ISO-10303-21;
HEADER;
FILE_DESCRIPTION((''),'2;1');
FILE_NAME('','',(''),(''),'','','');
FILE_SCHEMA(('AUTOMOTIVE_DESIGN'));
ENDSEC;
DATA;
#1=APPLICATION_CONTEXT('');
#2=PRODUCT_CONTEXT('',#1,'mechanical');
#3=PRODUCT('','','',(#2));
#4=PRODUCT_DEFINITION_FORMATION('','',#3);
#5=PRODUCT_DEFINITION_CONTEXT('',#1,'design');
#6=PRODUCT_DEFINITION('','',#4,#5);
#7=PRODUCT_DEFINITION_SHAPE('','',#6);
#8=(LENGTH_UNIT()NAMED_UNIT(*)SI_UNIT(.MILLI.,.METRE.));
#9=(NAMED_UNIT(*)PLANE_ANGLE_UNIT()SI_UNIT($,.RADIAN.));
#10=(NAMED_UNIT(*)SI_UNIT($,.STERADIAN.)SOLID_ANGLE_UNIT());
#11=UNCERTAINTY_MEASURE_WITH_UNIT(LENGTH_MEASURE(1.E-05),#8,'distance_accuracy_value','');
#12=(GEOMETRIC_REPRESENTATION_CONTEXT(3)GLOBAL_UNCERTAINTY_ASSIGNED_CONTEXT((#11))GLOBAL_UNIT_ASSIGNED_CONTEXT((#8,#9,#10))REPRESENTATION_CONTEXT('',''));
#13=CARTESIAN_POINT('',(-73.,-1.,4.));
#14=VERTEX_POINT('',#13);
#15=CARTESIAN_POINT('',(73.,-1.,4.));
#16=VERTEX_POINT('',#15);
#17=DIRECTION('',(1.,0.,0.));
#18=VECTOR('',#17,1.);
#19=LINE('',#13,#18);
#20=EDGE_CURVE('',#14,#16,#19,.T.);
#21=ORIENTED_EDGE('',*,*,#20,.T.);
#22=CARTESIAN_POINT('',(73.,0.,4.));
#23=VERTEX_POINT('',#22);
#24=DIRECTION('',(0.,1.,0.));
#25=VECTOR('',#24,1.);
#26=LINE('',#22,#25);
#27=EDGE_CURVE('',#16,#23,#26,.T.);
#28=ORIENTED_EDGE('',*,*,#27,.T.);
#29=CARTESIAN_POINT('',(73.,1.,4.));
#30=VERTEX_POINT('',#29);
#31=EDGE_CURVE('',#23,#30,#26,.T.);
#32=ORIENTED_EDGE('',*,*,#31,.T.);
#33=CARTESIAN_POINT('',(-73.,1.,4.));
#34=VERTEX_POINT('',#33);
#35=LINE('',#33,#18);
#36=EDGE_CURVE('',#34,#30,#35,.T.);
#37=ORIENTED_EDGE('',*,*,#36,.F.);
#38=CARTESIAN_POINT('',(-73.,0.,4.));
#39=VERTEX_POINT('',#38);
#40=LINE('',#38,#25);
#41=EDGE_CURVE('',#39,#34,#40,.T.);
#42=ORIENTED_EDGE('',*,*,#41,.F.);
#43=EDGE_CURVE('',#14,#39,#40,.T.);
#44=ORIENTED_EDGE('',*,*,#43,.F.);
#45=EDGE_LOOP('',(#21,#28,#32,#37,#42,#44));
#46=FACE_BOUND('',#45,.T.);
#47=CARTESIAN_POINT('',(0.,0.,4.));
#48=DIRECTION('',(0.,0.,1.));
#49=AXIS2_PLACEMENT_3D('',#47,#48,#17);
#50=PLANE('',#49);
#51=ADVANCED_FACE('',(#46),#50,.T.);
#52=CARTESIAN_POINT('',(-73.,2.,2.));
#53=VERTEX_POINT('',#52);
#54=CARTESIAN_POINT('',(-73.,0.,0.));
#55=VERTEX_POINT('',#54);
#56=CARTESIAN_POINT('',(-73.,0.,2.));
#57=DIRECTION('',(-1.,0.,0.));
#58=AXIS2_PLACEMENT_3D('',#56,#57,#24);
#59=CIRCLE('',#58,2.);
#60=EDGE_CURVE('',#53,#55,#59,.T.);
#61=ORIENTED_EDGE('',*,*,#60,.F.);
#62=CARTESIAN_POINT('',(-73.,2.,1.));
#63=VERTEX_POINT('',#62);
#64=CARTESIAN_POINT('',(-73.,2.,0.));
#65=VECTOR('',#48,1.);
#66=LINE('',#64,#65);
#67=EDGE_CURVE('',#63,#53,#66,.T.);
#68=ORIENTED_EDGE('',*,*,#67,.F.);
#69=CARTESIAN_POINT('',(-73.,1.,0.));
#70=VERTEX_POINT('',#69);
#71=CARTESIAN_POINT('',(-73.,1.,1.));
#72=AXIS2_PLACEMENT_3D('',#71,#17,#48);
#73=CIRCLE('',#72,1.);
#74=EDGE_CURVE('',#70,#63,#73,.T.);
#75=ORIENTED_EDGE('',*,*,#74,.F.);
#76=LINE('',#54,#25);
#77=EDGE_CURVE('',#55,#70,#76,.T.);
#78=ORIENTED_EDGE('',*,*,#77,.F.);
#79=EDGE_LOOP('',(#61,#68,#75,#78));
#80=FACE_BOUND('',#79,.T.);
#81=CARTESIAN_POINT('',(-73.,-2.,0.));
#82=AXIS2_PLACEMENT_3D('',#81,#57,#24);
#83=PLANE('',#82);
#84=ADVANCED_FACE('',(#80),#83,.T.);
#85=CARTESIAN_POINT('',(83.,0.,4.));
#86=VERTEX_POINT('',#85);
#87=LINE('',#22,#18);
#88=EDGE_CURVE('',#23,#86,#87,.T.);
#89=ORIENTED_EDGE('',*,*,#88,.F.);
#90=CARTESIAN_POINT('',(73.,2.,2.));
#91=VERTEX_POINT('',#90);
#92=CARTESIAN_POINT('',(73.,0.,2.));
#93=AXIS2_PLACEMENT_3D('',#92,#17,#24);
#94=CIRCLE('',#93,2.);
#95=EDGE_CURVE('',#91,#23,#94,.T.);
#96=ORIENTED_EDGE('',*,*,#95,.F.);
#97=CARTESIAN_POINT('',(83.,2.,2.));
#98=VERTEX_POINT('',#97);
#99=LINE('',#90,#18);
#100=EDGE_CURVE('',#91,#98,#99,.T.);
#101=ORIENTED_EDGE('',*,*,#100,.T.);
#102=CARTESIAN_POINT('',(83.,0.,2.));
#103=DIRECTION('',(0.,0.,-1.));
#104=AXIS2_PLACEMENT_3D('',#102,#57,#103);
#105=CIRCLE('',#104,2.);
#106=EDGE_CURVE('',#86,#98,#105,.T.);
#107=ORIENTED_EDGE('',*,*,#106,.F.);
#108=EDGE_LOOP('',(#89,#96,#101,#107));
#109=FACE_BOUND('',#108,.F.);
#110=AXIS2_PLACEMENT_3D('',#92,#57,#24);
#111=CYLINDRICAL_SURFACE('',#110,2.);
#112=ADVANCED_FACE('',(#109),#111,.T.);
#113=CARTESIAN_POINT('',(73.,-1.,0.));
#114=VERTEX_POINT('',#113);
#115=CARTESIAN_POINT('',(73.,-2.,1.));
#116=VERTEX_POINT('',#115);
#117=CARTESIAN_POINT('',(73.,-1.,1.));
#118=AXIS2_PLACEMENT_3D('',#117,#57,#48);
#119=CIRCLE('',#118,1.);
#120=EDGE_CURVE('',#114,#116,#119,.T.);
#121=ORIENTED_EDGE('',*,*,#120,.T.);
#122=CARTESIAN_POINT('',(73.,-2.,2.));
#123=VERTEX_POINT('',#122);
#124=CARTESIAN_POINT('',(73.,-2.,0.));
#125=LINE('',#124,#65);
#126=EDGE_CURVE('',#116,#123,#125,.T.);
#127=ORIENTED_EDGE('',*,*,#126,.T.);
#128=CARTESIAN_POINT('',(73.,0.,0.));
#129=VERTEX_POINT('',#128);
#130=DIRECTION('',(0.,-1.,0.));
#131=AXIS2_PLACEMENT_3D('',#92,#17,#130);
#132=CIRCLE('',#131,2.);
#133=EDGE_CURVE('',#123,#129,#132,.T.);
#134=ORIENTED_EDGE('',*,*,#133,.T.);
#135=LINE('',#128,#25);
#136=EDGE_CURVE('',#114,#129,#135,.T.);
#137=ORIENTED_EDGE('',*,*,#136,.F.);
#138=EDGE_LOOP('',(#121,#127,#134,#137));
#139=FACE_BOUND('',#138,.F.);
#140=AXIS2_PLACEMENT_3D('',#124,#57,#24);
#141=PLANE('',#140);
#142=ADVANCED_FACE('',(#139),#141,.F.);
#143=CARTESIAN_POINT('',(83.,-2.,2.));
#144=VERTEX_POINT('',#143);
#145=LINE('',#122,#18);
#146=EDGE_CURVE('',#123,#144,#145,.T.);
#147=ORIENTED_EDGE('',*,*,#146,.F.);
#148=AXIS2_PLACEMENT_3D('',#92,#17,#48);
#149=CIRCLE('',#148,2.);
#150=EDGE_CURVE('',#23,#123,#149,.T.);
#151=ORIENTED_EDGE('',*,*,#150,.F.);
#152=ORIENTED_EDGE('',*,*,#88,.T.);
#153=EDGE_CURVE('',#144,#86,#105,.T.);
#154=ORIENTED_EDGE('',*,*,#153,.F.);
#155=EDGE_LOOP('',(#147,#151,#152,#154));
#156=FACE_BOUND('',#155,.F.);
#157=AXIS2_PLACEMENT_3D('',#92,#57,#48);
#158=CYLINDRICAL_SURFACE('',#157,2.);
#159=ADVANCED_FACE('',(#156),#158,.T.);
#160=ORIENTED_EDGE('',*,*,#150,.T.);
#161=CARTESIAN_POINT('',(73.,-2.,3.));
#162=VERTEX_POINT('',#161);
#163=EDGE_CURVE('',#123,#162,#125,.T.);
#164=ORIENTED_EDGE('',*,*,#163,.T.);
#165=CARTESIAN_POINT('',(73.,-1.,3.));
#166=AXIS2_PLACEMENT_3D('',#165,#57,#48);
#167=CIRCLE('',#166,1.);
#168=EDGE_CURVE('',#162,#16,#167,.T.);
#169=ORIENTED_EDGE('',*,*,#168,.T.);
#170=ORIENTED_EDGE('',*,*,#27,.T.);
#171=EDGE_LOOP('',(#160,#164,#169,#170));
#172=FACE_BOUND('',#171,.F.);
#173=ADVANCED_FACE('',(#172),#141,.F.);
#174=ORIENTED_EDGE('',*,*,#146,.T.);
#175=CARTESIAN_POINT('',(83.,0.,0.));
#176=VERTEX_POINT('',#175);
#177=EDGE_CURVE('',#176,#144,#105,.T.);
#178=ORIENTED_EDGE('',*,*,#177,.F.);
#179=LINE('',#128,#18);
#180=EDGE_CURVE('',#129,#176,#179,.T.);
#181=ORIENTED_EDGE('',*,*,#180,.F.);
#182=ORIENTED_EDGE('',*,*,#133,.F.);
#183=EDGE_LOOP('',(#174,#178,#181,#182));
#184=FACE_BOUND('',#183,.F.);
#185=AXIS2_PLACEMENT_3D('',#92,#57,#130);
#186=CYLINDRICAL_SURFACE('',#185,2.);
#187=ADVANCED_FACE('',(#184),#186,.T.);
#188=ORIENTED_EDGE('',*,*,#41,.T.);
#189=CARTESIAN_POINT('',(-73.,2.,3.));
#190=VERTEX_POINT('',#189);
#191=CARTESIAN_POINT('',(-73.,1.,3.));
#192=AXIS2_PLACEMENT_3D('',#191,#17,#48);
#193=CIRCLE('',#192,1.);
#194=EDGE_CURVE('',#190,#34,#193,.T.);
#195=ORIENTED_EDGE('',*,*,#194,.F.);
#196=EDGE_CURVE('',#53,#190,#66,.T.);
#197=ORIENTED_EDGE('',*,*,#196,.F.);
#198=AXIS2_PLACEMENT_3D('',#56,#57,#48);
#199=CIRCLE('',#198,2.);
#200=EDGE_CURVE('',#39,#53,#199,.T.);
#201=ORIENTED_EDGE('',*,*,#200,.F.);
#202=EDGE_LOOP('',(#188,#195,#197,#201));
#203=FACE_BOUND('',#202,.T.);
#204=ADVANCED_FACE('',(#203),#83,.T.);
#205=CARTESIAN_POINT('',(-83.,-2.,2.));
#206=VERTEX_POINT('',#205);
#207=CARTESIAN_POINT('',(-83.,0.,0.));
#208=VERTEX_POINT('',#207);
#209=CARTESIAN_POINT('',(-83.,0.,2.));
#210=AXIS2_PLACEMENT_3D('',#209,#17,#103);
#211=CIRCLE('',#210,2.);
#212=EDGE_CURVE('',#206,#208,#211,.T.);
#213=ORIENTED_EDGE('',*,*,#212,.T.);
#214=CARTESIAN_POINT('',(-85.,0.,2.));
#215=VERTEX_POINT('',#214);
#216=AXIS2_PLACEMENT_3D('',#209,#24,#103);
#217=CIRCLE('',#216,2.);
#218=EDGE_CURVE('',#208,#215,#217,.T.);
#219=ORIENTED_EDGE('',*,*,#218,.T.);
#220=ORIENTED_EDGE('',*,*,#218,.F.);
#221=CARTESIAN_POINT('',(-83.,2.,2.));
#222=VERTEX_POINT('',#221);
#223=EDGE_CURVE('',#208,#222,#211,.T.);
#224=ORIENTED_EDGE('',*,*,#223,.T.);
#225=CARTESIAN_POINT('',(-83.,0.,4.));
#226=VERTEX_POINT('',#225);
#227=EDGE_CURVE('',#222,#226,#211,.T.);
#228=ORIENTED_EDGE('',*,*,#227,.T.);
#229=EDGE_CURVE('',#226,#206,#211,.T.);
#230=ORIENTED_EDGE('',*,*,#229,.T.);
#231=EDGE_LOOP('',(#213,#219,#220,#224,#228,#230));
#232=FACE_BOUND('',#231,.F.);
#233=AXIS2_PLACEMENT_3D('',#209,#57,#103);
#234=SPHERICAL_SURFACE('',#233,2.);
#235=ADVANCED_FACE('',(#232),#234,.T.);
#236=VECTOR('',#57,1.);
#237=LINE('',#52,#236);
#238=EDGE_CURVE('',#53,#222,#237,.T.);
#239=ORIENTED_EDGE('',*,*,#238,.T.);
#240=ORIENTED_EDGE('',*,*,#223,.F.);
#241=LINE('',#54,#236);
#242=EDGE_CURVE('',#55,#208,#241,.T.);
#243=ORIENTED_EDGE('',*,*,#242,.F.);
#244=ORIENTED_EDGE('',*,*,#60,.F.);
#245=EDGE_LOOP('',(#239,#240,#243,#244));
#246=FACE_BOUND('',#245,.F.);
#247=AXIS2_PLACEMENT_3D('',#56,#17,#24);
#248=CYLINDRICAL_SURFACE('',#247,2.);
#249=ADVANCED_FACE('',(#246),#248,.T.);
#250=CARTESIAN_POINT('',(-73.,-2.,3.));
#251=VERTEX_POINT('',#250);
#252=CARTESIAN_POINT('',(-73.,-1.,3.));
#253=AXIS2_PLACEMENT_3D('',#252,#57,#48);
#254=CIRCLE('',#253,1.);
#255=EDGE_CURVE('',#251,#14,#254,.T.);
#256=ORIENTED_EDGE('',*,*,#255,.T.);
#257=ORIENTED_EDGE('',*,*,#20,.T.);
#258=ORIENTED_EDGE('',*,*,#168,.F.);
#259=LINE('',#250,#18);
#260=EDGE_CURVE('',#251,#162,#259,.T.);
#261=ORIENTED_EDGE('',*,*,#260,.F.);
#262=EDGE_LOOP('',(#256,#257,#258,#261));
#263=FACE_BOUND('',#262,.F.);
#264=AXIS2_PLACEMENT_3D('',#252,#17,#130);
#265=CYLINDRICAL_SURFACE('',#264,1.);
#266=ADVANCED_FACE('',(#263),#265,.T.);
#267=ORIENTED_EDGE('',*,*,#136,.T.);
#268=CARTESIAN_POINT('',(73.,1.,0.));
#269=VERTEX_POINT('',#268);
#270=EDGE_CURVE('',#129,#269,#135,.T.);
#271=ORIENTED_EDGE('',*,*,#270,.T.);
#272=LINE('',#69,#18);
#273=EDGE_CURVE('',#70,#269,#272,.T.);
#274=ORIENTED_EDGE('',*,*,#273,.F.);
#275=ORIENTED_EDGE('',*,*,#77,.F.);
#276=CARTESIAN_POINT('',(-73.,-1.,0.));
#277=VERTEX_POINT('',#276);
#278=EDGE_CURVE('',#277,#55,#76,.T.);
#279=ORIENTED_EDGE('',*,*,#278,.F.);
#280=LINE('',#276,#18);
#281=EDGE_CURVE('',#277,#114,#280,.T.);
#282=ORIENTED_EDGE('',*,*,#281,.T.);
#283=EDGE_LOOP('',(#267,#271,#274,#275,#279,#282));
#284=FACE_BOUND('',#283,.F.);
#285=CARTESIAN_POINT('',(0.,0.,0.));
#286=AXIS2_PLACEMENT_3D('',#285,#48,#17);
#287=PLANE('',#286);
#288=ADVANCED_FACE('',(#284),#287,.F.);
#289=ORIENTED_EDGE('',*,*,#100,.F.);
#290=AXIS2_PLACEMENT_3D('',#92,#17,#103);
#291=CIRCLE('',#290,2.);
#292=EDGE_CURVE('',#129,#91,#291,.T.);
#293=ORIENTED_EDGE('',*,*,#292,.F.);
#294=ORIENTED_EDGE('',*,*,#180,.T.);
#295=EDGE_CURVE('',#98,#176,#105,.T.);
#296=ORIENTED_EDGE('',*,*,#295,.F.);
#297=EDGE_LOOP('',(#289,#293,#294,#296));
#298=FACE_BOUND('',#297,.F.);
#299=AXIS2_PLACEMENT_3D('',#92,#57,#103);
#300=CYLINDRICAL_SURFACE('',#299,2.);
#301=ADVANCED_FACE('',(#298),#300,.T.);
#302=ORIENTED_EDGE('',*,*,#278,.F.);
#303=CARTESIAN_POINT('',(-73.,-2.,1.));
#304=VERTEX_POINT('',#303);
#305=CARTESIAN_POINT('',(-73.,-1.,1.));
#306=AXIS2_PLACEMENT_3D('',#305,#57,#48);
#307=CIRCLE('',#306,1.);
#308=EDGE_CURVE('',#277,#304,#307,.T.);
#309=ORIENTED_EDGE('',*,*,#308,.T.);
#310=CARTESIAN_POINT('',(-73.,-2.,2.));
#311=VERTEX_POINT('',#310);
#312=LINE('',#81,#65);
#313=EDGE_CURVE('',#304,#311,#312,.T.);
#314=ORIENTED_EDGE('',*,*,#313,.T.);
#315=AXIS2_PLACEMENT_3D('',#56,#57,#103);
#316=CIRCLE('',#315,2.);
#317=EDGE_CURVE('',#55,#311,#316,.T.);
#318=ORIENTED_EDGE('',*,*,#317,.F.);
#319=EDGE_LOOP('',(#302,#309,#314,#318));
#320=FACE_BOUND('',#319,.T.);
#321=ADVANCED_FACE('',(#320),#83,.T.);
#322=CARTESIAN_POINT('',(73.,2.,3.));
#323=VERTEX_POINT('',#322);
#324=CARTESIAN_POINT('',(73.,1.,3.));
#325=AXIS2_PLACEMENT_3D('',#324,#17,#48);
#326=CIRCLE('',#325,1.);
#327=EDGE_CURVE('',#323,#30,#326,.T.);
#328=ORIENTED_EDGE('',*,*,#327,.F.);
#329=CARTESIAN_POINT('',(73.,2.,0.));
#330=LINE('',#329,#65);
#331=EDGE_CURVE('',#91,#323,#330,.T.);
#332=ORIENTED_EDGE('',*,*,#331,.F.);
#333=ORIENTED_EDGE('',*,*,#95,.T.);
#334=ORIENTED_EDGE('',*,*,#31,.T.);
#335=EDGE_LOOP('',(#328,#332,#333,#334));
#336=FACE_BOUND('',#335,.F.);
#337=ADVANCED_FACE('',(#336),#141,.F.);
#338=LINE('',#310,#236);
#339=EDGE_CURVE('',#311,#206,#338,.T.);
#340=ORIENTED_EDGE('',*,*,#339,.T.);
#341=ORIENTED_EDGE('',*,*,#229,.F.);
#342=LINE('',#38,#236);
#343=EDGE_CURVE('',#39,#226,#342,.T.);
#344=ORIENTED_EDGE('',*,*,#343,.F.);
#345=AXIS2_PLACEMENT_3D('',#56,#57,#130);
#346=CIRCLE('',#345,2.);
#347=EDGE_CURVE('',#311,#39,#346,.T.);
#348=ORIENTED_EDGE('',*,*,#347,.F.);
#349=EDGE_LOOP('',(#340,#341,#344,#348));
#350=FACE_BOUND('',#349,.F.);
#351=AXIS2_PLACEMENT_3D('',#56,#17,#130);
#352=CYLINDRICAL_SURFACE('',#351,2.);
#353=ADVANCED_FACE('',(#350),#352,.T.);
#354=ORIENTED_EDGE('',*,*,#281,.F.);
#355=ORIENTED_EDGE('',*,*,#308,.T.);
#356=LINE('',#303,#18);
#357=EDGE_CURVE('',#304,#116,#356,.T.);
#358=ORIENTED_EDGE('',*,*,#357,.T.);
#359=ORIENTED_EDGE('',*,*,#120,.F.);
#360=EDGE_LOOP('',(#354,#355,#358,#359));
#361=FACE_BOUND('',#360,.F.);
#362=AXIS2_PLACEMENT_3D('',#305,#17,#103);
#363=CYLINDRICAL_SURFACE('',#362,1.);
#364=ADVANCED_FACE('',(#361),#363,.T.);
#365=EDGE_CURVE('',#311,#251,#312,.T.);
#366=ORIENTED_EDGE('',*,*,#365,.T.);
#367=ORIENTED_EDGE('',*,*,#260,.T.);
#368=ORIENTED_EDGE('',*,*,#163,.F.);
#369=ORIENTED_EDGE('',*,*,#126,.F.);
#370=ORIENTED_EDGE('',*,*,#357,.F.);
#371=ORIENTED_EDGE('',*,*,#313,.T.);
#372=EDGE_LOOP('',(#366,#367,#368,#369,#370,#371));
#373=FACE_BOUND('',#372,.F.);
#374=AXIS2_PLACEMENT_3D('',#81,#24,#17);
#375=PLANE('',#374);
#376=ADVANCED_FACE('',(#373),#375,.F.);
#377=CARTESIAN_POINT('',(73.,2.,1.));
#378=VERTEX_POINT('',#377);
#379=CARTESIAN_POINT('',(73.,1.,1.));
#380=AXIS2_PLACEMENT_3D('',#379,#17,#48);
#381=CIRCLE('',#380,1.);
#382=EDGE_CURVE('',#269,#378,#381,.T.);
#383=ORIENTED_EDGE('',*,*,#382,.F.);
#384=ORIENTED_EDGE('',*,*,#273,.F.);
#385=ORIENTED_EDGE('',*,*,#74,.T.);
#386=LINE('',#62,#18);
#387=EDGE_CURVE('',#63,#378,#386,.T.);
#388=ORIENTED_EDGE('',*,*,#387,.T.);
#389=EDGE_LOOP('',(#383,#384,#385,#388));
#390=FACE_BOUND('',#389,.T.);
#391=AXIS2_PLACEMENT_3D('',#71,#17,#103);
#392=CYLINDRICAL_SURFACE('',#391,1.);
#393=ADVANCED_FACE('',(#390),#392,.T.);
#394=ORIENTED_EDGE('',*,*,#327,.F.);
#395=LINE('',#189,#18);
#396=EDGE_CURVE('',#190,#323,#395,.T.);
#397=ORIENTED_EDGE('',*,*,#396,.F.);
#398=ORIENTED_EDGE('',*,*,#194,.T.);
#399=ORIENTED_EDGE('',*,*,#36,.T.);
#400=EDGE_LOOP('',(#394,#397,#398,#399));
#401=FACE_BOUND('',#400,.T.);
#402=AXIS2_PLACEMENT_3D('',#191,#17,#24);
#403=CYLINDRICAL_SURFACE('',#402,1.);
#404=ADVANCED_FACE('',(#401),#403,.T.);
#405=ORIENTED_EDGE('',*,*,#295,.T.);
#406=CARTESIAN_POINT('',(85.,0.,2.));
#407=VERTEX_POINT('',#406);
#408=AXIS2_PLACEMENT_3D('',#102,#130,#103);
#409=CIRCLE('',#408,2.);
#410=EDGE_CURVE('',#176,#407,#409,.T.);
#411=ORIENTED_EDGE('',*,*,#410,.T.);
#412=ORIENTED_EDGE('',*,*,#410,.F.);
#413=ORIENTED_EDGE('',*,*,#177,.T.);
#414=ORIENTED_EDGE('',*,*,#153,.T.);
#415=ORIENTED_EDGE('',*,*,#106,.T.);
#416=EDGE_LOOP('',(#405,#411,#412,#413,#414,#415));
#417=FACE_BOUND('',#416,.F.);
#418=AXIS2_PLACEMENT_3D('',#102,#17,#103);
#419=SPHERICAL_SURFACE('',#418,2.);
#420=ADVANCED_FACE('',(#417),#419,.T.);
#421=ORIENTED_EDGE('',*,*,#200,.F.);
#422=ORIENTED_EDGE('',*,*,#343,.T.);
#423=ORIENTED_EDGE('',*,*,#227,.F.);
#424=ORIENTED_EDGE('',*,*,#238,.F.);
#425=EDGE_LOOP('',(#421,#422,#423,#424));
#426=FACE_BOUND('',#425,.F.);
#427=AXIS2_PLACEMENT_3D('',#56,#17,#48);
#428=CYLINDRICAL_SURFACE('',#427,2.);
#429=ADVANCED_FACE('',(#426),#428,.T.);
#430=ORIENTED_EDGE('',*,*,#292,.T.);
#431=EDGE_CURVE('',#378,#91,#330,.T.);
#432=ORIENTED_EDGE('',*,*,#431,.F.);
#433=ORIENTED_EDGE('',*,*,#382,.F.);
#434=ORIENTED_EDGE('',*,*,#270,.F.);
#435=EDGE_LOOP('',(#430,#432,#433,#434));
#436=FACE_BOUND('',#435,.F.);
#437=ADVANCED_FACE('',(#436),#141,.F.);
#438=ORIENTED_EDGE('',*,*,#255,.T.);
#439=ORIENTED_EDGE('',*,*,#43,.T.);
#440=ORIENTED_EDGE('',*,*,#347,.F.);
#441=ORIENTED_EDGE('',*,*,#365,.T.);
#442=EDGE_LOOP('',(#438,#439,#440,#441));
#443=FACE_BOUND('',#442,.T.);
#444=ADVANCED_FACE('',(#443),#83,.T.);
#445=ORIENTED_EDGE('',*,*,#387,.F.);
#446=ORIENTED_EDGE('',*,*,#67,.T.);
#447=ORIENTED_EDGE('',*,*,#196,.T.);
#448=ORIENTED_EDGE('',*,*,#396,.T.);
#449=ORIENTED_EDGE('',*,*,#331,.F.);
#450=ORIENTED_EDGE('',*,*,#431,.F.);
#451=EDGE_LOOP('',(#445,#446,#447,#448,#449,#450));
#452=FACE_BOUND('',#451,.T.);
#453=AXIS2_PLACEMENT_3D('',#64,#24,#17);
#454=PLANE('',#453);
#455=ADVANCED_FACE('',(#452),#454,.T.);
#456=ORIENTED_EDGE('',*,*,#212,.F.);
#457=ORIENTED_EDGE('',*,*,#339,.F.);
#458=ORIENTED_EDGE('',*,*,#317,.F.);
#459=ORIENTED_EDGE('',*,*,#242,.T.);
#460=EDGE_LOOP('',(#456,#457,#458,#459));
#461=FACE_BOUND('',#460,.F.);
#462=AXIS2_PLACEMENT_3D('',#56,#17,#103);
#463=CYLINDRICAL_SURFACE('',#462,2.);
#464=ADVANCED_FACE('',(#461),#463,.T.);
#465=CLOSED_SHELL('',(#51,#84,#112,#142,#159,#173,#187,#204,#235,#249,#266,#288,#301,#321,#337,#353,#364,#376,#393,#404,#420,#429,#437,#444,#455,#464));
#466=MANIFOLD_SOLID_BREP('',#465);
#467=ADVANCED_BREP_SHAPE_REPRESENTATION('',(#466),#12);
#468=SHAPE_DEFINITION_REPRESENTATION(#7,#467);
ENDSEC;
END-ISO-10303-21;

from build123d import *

# Parameters (mm, degrees)
F0_W     = 146
F0_H     = 4
F1_DEPTH = 4
F3_DEPTH = 12
F6_DEPTH = 12
F8_R     = 1


# Not quite as in the source:
# - a fillet or chamfer that OpenCascade refuses, or shapes differently, is made with other operations: its cross-section is extruded or revolved along the edge and cut away or added


with BuildPart() as f1:
    # F0 (on Top) → F1 (new body)
    with BuildSketch(Plane.XY):
        Rectangle(F0_W, F0_H)
    extrude(amount=F1_DEPTH)

    # F2 (on face) → F3 (join)
    with BuildSketch(Plane(origin=(-73, 0, 0), x_dir=(0, -1, 0), z_dir=(-1, 0, 0))):
        with BuildLine():
            ThreePointArc((0, 0), (1.4142135624, 0.5857864376), (2, 2))
            ThreePointArc((2, 2), (1.4142135624, 3.4142135624), (0, 4))
            ThreePointArc((0, 4), (-1.4142135624, 3.4142135624), (-2, 2))
            ThreePointArc((-2, 2), (-1.4142135624, 0.5857864376), (0, 0))
        make_face()
    extrude(amount=F3_DEPTH)

    # F4: fillet of radius 2 on 1 edges, made by hand

    # F4_s1 → F4_t2 (revolve, cut)
    with BuildSketch(Plane.XZ):
        with BuildLine():
            ThreePointArc((-83, 0), (-84.4142135624, 0.5857864376), (-85, 2))
            Line((-85, 2), (-85, 0))
            Line((-85, 0), (-83, 0))
        make_face()
    revolve(axis=Axis((-85, 0, 2), (1, 0, 0)), mode=Mode.SUBTRACT)

    # F5 (on face) → F6 (join)
    with BuildSketch(Plane.YZ.offset(73)):
        with BuildLine():
            ThreePointArc((0, 0), (1.4142135624, 0.5857864376), (2, 2))
            ThreePointArc((2, 2), (1.4142135624, 3.4142135624), (0, 4))
            ThreePointArc((0, 4), (-1.4142135624, 3.4142135624), (-2, 2))
            ThreePointArc((-2, 2), (-1.4142135624, 0.5857864376), (0, 0))
        make_face()
    extrude(amount=F6_DEPTH)

    # F7: fillet of radius 2 on 1 edges, made by hand

    # F7_s1 → F7_t2 (revolve, cut)
    with BuildSketch(Plane.XZ):
        with BuildLine():
            ThreePointArc((83, 0), (84.4142135624, 0.5857864376), (85, 2))
            Line((85, 2), (85, 0))
            Line((85, 0), (83, 0))
        make_face()
    revolve(axis=Axis((85, 0, 2), (-1, 0, 0)), mode=Mode.SUBTRACT)

    # F8
    f8_edges = [f1.edges().sort_by_distance(p)[0] for p in [
        (0, -2, 4),
        (0, -2, 0),
        (0, 2, 0),
        (0, 2, 4),
    ]]
    fillet(f8_edges, radius=F8_R)


solid = f1.part
